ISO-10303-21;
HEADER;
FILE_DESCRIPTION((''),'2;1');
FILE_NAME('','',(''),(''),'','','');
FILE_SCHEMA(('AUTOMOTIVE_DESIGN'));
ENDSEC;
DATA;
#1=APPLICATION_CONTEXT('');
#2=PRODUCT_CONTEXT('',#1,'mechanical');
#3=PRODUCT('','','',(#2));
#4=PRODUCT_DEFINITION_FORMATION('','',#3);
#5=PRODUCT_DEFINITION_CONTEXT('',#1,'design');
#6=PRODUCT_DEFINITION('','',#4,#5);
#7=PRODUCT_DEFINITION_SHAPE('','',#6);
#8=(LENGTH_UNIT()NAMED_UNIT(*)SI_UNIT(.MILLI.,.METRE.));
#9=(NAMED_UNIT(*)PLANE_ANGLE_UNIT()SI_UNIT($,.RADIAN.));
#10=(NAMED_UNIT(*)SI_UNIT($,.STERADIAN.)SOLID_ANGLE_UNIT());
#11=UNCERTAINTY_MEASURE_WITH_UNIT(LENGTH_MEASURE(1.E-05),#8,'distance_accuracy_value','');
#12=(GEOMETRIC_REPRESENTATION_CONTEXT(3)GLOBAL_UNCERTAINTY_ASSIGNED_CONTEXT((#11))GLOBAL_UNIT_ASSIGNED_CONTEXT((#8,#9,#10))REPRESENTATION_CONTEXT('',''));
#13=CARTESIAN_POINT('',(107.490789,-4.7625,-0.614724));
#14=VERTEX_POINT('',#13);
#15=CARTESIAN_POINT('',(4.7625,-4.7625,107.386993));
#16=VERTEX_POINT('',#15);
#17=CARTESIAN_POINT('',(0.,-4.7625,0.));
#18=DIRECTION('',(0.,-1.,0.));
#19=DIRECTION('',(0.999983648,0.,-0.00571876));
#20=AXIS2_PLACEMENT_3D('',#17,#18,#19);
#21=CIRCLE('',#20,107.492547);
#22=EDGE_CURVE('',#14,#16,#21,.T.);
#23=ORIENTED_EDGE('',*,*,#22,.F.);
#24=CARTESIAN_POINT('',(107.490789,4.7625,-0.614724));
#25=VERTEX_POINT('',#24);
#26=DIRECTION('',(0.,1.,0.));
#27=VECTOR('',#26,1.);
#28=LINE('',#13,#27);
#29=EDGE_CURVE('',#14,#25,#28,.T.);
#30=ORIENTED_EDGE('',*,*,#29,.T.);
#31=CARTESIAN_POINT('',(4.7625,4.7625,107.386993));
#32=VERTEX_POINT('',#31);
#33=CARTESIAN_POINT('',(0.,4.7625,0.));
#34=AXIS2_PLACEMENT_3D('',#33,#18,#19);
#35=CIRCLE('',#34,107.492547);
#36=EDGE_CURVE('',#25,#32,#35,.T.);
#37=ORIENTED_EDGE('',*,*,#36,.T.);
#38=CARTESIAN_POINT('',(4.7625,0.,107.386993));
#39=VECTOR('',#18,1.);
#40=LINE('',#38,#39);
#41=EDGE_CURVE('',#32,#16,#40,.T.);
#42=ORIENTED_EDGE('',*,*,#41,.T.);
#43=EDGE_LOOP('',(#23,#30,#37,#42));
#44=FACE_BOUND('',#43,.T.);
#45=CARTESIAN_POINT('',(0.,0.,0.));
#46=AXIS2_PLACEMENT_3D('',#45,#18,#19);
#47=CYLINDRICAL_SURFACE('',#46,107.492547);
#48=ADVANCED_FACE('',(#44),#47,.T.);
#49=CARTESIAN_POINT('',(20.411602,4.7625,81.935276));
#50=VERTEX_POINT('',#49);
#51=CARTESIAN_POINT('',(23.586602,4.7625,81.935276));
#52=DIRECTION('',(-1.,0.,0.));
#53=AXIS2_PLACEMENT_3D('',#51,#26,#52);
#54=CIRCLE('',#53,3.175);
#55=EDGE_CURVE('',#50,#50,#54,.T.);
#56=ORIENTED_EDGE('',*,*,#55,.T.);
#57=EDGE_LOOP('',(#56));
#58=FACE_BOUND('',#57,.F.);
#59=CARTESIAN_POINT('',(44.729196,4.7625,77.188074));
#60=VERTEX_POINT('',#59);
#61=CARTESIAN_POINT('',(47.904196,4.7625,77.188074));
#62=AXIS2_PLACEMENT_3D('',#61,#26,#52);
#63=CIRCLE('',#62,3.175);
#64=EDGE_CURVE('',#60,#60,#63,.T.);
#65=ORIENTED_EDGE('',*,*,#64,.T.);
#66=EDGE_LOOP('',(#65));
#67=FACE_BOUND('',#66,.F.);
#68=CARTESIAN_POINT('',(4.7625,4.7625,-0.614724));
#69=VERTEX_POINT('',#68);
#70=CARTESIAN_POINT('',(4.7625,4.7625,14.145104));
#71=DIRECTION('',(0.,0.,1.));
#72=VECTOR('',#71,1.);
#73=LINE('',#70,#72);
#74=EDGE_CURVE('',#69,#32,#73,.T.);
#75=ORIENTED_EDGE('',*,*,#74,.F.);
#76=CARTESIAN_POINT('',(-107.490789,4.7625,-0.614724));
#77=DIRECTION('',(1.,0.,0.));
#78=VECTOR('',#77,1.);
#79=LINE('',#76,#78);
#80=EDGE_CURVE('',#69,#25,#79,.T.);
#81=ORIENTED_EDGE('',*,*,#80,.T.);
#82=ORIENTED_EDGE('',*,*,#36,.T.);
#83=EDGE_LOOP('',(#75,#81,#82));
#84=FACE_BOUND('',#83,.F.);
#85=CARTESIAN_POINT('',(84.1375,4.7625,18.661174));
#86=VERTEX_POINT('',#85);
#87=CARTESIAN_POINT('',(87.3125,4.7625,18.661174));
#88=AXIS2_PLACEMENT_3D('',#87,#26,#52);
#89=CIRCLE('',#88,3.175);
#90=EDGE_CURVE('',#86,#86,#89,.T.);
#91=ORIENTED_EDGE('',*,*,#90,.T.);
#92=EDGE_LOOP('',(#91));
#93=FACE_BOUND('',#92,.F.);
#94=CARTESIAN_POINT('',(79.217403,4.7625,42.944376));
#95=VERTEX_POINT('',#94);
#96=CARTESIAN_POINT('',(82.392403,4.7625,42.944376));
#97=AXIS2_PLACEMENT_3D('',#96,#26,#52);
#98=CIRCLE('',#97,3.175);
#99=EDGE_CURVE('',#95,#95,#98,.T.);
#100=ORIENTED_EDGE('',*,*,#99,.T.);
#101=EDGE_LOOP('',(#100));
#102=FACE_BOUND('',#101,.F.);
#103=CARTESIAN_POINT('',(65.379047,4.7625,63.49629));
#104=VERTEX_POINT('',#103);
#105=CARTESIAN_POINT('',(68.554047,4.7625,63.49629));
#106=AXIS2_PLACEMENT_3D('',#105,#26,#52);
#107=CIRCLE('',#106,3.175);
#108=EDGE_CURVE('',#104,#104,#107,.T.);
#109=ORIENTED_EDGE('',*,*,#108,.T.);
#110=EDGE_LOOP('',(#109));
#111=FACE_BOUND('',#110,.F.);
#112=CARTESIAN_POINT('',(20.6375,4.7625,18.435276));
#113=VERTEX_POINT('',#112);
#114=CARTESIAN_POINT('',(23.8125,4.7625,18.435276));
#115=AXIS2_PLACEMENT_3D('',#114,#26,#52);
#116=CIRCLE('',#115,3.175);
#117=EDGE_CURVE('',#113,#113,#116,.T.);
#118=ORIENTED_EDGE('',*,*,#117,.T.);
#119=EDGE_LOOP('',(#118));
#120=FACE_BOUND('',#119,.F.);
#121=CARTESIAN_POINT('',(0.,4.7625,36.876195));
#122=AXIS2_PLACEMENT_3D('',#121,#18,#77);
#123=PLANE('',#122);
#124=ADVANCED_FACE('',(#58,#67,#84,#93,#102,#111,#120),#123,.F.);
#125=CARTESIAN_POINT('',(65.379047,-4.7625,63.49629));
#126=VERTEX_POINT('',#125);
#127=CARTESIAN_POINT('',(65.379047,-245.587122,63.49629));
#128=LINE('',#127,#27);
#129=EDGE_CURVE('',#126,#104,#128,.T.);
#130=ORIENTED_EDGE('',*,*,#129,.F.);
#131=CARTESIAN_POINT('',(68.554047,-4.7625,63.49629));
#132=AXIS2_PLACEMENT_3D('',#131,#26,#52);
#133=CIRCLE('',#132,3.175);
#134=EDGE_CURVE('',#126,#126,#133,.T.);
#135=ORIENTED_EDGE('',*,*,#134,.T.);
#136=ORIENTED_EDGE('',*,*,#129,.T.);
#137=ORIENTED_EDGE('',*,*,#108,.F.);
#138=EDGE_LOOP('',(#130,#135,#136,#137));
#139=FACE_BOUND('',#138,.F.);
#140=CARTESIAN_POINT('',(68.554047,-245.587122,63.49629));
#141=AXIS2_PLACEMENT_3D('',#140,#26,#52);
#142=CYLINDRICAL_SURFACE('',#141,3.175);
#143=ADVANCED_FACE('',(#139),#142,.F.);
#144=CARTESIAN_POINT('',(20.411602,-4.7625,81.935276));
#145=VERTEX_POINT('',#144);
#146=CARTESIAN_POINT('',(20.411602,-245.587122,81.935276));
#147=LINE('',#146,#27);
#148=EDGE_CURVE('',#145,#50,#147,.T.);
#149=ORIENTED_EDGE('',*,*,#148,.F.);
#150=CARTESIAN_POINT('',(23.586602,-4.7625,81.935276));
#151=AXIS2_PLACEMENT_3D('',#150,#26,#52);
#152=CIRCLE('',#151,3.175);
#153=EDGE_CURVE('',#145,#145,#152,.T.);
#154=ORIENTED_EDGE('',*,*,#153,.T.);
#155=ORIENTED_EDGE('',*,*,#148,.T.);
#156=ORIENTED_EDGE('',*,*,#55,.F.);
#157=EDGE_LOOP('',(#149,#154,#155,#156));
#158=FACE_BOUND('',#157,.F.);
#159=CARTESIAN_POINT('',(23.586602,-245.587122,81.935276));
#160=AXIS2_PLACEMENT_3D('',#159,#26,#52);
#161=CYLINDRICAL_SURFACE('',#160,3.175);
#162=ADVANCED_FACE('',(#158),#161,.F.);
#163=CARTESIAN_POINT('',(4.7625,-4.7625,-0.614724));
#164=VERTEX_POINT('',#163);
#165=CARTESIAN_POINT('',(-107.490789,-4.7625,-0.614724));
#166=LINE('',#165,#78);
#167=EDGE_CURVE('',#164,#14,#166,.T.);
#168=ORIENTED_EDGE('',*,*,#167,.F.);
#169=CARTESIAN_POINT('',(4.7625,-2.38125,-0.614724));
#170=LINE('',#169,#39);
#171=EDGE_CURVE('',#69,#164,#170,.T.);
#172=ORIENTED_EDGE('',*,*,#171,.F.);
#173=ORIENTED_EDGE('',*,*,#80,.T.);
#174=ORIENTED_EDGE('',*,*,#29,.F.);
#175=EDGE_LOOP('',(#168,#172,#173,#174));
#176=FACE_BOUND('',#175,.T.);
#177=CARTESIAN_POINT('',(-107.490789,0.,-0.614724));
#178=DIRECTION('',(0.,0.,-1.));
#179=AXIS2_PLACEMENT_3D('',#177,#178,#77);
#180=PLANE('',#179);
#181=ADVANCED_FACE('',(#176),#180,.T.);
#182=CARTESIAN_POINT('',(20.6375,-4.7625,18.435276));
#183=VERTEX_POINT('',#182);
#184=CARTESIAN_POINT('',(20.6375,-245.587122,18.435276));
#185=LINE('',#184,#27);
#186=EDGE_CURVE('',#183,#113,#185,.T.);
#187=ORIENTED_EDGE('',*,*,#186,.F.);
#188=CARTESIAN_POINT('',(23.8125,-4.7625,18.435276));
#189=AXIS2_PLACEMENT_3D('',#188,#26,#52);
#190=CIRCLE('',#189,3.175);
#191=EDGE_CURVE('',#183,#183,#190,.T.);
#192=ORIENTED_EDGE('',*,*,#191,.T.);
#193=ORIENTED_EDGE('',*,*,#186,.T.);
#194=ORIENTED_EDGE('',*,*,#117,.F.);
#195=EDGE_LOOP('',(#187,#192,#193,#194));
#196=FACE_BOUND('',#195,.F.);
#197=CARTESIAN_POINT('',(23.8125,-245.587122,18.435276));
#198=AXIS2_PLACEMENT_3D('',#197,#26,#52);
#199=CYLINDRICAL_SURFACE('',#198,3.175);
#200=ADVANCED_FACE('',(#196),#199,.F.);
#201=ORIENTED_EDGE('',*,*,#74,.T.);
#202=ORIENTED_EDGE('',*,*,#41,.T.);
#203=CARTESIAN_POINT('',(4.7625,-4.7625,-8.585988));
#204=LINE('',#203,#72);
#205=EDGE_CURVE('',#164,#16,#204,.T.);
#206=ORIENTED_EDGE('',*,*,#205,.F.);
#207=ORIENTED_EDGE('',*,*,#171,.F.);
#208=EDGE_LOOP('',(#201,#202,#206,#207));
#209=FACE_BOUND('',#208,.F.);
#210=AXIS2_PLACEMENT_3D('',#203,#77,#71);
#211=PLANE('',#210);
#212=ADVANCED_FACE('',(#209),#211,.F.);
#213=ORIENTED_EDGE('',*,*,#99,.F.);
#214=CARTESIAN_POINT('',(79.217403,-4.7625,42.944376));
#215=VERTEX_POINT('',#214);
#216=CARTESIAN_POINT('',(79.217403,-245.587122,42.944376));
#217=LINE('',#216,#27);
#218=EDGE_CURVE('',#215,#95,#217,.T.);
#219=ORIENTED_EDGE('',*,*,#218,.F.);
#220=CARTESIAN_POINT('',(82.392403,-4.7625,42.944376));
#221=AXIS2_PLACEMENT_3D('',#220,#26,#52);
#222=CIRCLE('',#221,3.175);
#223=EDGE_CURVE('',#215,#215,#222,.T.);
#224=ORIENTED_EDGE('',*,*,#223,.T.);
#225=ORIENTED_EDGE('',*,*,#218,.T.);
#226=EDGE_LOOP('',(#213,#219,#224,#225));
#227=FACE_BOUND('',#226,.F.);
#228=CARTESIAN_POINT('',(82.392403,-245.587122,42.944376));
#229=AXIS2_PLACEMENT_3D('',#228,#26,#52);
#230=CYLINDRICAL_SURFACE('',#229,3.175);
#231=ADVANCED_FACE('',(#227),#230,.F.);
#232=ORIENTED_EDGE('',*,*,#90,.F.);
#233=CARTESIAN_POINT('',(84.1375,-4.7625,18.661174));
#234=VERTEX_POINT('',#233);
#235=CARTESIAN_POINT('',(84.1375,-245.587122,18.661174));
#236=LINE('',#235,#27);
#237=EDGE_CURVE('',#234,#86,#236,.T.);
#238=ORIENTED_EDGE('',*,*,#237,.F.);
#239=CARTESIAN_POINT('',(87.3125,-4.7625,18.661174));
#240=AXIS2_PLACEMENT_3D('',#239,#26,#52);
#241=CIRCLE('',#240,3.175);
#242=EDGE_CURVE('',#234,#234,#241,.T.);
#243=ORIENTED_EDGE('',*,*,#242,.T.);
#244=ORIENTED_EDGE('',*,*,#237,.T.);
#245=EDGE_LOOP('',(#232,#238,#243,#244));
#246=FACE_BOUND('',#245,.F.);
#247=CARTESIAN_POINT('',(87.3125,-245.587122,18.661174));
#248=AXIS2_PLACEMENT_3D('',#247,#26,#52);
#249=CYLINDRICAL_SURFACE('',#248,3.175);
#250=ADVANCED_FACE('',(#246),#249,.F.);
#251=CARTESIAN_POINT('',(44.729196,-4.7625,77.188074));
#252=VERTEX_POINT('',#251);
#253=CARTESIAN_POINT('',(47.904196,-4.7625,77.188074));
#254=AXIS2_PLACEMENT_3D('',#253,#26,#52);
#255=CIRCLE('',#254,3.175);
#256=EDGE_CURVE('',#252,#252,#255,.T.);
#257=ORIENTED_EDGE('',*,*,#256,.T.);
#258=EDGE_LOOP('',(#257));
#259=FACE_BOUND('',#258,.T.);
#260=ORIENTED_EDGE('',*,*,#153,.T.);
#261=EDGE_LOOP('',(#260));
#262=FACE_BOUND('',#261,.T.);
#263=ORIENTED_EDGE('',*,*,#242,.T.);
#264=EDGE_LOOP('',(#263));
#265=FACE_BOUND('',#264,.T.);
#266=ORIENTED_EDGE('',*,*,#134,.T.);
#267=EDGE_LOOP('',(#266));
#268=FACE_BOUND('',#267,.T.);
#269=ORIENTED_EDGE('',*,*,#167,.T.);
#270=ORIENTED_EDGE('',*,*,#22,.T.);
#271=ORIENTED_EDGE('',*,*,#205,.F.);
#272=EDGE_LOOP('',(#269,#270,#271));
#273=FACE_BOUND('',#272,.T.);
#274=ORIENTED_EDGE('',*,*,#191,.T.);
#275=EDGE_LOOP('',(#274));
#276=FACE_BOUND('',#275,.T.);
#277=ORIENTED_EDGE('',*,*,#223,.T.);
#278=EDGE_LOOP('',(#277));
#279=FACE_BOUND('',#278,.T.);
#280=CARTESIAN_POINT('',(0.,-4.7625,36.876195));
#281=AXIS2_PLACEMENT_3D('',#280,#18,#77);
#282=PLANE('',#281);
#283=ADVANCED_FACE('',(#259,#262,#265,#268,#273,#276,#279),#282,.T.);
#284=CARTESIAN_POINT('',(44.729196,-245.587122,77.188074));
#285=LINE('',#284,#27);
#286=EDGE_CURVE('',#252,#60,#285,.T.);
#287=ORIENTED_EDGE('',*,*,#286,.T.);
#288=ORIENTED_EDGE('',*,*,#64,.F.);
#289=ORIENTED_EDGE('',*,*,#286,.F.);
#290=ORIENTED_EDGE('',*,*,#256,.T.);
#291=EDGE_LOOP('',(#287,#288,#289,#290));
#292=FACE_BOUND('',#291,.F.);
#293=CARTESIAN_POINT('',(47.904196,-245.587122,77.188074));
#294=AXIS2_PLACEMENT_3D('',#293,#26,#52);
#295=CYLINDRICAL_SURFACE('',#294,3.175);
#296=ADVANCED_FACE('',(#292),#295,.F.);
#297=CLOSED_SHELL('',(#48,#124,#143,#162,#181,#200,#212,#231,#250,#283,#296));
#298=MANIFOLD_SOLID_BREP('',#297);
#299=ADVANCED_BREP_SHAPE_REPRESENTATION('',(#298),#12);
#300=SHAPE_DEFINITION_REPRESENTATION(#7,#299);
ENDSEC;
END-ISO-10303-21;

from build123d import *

# Parameters (mm, degrees)
F1_DEPTH = 4.7625
F3_D     = 6.35
F4_R     = 3.175
F5_DEPTH = 25.4


with BuildPart() as f1:
    # F0 (on Front) → F1 (new body, symmetric)
    with BuildSketch(Plane.XZ):
        with BuildLine():
            ThreePointArc((107.4907893633, -0.6147240541), (0, 107.4925471073), (-107.4907893633, -0.6147240541))
            Line((-107.4907893633, -0.6147240541), (107.4907893633, -0.6147240541))
        make_face()
    extrude(amount=F1_DEPTH, both=True)

    # F3 (through all)
    with Locations(Plane.XZ.offset(4.7625)):
        with Locations((23.8125, 18.4352759459), (87.3125, 18.6611738243), (47.9041955289, 77.1880736359), (23.5866021216, 81.9352759459), (68.5540466837, 63.4962904729), (82.392402939, 42.9443763274), (-23.8125, 18.4352759459), (-23.5866021216, 81.9352759459), (-47.9041955289, 77.1880736359), (-68.5540466837, 63.4962904729), (-82.392402939, 42.9443763274), (-87.3125, 18.6611738243)):
            Hole(F3_D / 2)

    # F4 (on face) → F5 (cut)
    with BuildSketch(Plane.XZ.offset(4.7625)):
        with BuildLine():
            Line((-135.8842252305, -8.5859880761), (4.7625, -8.5859880761))
            Line((4.7625, -8.5859880761), (4.7625, -0.6147240541))
            Line((4.7625, -0.6147240541), (-107.4907893633, -0.6147240541))
            ThreePointArc((-107.4907893633, -0.6147240541), (-74.5276330195, 77.4614717141), (4.7625, 107.3869930548))
            Line((4.7625, 107.3869930548), (4.7625, 118.4140119239))
            Line((4.7625, 118.4140119239), (-135.8842252305, 118.4140119239))
            Line((-135.8842252305, 118.4140119239), (-135.8842252305, -8.5859880761))
        make_face()
        with BuildLine():
            Line((-107.4907893633, -0.6147240541), (4.7625, -0.6147240541))
            Line((4.7625, -0.6147240541), (4.7625, 107.3869930548))
            ThreePointArc((4.7625, 107.3869930548), (-74.5276330195, 77.4614717141), (-107.4907893633, -0.6147240541))
        make_face()
        with Locations((-87.3125, 18.6611738243)):
            Circle(F4_R, mode=Mode.SUBTRACT)
        with Locations((-23.8125, 18.4352759459)):
            Circle(F4_R, mode=Mode.SUBTRACT)
        with Locations((-82.392402939, 42.9443763274)):
            Circle(F4_R, mode=Mode.SUBTRACT)
        with Locations((-68.5540466837, 63.4962904729)):
            Circle(F4_R, mode=Mode.SUBTRACT)
        with Locations((-47.9041955289, 77.1880736359)):
            Circle(F4_R, mode=Mode.SUBTRACT)
        with Locations((-23.5866021216, 81.9352759459)):
            Circle(F4_R, mode=Mode.SUBTRACT)
    extrude(amount=-F5_DEPTH, mode=Mode.SUBTRACT)


solid = f1.part
